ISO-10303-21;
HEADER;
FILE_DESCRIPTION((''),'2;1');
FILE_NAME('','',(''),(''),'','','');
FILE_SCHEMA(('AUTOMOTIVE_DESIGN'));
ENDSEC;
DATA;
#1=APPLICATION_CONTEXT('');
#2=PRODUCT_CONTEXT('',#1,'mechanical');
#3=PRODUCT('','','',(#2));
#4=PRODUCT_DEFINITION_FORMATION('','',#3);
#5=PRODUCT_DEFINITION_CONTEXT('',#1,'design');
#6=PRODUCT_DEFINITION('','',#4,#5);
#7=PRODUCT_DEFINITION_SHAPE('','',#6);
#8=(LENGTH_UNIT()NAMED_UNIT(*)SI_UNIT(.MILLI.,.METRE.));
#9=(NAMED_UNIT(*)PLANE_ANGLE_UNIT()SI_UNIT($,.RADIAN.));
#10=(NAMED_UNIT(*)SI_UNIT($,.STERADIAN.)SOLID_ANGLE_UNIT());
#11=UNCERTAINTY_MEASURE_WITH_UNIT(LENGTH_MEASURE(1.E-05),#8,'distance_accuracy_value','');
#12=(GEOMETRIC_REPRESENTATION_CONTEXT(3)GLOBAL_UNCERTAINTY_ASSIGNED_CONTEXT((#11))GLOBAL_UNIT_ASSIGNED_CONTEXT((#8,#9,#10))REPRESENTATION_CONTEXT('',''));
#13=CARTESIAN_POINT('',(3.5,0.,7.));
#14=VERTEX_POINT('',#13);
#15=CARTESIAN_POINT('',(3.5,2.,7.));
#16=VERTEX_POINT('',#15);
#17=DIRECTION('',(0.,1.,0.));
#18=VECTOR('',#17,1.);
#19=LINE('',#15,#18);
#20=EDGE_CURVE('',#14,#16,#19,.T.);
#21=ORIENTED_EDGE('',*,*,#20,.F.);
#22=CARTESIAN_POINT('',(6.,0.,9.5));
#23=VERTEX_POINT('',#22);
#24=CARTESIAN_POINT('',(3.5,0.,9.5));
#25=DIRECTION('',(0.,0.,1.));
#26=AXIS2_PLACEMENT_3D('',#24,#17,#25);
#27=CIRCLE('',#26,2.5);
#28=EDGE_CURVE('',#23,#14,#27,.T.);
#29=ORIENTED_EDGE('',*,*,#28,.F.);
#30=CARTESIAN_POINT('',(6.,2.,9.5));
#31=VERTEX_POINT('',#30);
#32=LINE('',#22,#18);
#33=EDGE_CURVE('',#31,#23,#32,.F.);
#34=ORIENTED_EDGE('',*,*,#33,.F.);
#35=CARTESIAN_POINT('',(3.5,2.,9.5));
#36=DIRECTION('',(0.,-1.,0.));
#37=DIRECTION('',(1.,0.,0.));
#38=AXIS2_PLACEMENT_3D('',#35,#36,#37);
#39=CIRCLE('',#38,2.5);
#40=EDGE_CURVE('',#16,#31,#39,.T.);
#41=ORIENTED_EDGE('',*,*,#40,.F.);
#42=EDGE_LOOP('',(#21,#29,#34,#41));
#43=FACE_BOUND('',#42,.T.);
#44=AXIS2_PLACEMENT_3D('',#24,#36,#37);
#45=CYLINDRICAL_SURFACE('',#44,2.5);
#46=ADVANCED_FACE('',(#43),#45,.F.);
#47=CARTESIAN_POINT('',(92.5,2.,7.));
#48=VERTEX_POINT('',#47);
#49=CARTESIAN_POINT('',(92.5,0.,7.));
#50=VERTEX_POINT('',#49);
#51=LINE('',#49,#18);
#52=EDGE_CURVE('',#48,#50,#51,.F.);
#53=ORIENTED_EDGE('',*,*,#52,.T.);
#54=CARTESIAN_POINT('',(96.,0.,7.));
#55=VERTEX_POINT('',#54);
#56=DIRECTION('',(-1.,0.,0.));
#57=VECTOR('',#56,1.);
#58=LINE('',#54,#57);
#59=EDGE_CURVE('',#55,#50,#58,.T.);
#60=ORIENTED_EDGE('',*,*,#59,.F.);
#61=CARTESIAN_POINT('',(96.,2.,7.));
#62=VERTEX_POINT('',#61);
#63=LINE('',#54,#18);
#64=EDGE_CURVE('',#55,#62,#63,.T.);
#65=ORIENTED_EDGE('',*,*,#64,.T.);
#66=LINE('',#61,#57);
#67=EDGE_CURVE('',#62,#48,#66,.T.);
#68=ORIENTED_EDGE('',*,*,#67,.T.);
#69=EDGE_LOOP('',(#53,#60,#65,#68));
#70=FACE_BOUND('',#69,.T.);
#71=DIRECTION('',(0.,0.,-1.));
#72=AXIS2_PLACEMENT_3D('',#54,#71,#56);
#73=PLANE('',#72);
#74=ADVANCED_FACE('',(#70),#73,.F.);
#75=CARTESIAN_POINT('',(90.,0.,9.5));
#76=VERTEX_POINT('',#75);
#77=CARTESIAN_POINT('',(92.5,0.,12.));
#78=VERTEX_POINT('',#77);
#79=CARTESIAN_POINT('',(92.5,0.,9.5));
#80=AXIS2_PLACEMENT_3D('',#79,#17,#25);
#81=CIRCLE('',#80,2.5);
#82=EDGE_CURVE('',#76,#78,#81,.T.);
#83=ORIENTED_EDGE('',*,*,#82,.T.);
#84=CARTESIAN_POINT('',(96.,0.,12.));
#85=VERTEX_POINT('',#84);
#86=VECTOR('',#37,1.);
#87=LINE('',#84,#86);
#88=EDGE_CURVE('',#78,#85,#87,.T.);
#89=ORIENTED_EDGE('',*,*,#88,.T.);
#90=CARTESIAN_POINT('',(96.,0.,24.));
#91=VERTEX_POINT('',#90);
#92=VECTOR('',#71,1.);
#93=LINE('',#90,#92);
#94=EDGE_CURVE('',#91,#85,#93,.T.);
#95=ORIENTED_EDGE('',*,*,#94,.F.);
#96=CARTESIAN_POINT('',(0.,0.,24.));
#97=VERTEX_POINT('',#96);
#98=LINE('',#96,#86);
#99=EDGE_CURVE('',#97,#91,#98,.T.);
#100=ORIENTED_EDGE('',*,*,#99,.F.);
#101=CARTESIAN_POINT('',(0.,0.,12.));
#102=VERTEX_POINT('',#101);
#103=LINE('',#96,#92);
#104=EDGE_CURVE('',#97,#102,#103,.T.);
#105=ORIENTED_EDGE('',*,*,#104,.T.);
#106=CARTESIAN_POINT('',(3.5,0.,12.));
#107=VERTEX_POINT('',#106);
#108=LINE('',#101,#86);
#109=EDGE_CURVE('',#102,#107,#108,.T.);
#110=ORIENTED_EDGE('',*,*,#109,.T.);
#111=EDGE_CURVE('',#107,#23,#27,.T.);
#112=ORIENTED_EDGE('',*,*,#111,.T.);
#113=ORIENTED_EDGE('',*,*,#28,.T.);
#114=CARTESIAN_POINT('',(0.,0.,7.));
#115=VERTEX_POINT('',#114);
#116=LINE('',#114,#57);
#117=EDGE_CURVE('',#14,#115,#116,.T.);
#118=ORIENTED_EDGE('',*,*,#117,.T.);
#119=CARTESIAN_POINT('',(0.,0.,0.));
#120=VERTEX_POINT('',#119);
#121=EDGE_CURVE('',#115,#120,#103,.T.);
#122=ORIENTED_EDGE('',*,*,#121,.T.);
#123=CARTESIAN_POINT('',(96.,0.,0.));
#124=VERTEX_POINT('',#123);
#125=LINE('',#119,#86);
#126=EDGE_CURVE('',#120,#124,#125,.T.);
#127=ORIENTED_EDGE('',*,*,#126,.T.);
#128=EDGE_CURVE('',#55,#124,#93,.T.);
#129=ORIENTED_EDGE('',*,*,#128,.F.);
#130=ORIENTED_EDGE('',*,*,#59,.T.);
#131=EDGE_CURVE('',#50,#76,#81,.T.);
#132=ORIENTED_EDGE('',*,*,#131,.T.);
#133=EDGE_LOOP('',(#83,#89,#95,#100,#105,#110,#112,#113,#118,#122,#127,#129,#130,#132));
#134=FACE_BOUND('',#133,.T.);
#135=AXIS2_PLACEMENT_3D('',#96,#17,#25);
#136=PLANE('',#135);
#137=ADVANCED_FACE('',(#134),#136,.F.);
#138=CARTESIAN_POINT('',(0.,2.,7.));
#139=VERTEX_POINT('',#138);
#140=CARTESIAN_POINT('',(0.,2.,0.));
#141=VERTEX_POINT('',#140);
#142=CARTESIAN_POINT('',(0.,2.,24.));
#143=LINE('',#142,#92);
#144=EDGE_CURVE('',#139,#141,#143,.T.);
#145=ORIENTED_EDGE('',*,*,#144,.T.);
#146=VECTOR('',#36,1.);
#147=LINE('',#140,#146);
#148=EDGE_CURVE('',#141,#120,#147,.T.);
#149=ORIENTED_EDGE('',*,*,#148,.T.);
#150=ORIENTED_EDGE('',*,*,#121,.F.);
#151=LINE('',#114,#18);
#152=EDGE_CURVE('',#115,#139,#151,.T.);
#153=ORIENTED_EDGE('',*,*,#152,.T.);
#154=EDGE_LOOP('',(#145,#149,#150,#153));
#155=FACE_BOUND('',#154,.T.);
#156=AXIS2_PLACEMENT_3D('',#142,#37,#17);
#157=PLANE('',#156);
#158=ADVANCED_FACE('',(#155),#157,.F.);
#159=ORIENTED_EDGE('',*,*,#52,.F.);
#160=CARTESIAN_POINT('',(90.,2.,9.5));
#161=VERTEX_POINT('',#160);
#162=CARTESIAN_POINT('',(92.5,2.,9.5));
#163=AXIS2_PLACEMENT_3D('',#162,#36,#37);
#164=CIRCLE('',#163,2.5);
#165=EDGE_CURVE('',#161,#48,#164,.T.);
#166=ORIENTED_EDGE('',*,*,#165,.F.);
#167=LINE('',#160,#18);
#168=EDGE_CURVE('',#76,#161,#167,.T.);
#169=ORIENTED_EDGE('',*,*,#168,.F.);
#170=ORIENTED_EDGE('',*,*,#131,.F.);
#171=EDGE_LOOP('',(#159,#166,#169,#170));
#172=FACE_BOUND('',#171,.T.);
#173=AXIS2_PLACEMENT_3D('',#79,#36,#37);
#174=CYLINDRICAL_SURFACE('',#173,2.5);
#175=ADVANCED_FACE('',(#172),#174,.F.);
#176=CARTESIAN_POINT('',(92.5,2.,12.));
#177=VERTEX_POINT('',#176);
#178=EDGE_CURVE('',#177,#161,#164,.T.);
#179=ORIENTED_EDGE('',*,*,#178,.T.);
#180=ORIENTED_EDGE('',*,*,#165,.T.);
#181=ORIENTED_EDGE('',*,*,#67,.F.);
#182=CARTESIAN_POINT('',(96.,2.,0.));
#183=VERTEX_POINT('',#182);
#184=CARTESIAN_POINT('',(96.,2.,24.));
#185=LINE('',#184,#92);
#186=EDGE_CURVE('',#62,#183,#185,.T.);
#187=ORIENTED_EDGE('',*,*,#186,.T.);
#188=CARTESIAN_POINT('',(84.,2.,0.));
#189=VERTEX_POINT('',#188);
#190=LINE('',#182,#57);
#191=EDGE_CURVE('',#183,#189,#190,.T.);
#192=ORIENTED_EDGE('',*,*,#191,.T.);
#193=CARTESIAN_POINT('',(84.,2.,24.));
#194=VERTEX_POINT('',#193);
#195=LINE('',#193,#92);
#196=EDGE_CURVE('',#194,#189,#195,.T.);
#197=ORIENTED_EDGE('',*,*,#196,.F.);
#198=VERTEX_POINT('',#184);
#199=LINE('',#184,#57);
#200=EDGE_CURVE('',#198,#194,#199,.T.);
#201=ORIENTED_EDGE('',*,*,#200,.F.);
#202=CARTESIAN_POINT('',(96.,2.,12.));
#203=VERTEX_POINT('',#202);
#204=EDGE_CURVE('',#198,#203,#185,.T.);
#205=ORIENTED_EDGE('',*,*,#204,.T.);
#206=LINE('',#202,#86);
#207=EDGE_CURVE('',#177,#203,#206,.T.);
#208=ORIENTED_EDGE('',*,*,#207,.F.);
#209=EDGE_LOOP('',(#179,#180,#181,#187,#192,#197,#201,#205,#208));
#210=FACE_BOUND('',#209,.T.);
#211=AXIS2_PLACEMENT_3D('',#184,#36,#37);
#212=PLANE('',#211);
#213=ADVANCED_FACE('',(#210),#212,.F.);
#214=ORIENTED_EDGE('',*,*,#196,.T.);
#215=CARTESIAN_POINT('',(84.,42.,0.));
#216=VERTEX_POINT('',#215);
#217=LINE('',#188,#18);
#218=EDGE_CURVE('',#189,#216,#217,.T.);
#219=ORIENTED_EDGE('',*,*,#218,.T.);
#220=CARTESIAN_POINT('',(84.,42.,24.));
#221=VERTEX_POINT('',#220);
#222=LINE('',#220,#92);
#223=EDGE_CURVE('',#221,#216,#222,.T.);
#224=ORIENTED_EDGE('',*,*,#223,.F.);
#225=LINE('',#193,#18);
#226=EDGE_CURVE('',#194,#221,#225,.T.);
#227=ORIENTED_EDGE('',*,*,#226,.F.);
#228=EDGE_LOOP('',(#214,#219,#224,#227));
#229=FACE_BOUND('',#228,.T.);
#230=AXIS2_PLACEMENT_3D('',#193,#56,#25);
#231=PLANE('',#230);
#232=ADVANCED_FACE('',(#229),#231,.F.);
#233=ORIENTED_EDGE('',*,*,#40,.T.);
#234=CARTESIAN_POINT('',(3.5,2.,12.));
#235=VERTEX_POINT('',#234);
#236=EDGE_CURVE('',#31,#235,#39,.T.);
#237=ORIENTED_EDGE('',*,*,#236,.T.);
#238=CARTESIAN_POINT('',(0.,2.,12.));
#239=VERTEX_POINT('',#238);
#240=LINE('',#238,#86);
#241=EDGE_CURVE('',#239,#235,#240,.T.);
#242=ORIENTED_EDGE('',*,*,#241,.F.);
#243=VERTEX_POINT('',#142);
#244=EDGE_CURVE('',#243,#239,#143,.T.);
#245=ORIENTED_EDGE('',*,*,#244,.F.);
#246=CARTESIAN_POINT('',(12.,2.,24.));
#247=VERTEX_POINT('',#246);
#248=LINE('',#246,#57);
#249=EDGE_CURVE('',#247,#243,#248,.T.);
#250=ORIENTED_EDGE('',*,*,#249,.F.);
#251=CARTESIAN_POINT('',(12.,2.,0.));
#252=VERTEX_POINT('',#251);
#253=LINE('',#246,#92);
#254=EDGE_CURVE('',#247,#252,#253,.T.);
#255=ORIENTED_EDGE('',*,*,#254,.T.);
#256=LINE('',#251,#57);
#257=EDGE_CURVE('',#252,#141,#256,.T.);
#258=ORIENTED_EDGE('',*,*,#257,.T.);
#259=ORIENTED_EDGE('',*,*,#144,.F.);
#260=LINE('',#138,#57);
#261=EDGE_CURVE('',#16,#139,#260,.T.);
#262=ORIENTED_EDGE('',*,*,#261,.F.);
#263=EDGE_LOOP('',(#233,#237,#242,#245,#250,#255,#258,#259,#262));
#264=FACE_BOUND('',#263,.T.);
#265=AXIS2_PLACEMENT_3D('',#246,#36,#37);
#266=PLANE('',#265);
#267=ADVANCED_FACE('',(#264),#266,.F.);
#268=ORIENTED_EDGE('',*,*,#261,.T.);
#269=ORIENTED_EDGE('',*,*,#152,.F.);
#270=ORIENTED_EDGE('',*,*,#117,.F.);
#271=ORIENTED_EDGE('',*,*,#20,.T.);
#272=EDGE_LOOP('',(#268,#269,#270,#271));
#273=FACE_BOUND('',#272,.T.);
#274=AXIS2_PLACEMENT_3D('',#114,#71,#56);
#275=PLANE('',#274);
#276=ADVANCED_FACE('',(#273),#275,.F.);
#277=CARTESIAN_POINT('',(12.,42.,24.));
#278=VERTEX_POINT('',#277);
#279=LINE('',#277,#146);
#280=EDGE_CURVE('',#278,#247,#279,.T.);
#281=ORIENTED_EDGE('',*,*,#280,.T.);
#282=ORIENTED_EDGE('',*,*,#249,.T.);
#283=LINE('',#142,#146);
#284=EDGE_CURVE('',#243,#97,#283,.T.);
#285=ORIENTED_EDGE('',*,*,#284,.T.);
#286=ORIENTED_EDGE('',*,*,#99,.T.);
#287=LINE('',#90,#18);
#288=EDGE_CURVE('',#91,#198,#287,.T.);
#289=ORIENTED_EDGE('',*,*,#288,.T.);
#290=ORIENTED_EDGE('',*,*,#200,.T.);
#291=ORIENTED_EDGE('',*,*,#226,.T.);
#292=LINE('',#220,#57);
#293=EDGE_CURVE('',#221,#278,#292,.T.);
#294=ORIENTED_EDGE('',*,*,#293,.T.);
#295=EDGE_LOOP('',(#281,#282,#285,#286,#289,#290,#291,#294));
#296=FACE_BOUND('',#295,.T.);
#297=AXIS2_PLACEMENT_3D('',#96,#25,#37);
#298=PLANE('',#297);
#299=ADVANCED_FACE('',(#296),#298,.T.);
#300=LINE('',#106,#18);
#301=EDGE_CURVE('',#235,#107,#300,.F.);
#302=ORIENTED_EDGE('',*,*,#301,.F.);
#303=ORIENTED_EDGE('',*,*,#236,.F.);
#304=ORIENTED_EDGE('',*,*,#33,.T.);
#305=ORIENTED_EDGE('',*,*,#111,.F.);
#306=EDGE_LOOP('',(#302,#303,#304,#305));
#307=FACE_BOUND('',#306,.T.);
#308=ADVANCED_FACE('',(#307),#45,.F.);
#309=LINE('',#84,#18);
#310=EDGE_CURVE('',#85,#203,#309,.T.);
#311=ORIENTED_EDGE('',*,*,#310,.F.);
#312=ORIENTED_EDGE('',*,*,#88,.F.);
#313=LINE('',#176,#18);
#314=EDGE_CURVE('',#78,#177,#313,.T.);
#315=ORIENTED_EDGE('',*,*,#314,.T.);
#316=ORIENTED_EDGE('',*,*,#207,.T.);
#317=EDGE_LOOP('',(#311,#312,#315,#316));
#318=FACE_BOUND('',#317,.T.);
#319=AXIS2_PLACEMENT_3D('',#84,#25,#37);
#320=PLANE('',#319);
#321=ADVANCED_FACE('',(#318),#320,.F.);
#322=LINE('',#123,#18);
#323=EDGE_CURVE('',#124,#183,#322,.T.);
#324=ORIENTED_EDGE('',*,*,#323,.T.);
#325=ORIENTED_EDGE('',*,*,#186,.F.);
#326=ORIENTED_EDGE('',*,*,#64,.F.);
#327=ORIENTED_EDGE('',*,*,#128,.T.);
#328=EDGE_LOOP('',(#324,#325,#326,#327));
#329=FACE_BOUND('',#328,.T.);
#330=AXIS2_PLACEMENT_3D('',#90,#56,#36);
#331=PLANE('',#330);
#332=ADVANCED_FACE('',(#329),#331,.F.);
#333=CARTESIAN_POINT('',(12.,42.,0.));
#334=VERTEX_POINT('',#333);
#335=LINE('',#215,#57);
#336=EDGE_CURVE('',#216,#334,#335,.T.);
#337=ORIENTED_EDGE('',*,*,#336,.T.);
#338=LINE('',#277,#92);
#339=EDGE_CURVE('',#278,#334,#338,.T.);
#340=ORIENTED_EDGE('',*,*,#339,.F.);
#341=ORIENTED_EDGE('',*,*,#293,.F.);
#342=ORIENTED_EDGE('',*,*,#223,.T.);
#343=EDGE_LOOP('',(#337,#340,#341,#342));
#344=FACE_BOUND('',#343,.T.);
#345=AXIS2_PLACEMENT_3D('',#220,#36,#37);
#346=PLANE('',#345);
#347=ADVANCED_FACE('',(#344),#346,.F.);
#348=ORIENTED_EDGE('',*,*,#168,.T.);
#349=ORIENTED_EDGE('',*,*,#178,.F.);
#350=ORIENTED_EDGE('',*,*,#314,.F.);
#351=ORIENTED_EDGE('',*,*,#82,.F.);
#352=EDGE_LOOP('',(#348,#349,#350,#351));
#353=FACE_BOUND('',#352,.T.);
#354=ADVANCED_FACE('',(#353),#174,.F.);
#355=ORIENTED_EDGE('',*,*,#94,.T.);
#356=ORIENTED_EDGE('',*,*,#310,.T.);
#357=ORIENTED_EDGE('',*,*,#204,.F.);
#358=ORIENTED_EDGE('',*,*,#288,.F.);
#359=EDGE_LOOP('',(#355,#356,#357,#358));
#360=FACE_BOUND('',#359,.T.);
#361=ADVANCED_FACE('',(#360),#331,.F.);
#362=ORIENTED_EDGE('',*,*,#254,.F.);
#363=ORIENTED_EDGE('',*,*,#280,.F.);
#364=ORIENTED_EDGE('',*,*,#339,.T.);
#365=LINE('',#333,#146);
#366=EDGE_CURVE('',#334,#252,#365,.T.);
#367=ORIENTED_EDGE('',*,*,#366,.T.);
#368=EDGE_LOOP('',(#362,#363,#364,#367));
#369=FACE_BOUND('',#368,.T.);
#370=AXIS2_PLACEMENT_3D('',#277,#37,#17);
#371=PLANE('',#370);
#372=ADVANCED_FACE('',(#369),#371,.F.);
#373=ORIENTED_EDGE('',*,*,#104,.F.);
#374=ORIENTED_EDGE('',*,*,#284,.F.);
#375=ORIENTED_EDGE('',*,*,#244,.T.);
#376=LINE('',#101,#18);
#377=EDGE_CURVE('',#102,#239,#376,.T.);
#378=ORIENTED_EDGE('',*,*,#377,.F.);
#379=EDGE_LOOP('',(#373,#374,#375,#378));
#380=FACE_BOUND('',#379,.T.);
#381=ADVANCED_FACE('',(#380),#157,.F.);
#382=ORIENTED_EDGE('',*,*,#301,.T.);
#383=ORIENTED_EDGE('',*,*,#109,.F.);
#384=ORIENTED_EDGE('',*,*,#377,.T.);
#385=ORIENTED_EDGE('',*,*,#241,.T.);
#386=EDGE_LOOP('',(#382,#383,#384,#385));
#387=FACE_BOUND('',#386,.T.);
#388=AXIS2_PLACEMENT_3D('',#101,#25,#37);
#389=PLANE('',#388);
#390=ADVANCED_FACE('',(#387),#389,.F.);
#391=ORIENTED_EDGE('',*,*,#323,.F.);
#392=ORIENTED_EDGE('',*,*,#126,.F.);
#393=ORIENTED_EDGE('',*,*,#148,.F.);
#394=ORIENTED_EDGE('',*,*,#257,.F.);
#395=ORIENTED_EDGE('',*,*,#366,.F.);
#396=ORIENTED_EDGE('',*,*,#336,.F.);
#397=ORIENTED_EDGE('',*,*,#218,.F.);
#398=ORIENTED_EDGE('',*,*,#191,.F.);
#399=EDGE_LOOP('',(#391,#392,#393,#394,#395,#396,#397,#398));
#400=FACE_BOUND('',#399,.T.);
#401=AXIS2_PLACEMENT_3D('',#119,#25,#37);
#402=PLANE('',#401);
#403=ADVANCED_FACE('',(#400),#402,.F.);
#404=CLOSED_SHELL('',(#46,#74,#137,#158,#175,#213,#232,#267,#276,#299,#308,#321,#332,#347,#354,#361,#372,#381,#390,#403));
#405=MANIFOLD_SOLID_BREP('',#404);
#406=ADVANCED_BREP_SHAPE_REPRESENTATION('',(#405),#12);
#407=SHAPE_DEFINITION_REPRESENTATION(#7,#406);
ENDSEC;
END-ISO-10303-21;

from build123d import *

# Parameters (mm, degrees)
BODY_DEPTH               = 24
SKETCH2_W                = 6
SKETCH2_H                = 5
FIXATION_CUTOUT_DEPTH    = 107.733312513
FIXATION_CUTOUT_ROUNDS_R = 2.5


with BuildPart() as part:
    # Sketch1 → body (new body)
    with BuildSketch(Plane.XY):
        Polygon((0, 0), (96, 0), (96, 2), (84, 2), (84, 42), (12, 42), (12, 2), (0, 2), align=None)
    extrude(amount=BODY_DEPTH)

    # Sketch2 → fixation_cutout (cut, through all)
    with BuildSketch(Plane(origin=(0, 2, 0), x_dir=(1, 0, 0), z_dir=(0, 1, 0))):
        with Locations((3, -9.5)):
            Rectangle(SKETCH2_W, SKETCH2_H)
        with Locations((93, -9.5)):
            Rectangle(SKETCH2_W, SKETCH2_H)
    extrude(amount=-FIXATION_CUTOUT_DEPTH, mode=Mode.SUBTRACT)

    # fixation_cutout_rounds
    fixation_cutout_rounds_edges = [part.edges().sort_by_distance(p)[0] for p in [
        (90, 1, 12),
        (90, 1, 7),
        (6, 1, 12),
        (6, 1, 7),
    ]]
    fillet(fixation_cutout_rounds_edges, radius=FIXATION_CUTOUT_ROUNDS_R - 0.0001)  # a hair under: the kernel refuses the full size


solid = part.part
